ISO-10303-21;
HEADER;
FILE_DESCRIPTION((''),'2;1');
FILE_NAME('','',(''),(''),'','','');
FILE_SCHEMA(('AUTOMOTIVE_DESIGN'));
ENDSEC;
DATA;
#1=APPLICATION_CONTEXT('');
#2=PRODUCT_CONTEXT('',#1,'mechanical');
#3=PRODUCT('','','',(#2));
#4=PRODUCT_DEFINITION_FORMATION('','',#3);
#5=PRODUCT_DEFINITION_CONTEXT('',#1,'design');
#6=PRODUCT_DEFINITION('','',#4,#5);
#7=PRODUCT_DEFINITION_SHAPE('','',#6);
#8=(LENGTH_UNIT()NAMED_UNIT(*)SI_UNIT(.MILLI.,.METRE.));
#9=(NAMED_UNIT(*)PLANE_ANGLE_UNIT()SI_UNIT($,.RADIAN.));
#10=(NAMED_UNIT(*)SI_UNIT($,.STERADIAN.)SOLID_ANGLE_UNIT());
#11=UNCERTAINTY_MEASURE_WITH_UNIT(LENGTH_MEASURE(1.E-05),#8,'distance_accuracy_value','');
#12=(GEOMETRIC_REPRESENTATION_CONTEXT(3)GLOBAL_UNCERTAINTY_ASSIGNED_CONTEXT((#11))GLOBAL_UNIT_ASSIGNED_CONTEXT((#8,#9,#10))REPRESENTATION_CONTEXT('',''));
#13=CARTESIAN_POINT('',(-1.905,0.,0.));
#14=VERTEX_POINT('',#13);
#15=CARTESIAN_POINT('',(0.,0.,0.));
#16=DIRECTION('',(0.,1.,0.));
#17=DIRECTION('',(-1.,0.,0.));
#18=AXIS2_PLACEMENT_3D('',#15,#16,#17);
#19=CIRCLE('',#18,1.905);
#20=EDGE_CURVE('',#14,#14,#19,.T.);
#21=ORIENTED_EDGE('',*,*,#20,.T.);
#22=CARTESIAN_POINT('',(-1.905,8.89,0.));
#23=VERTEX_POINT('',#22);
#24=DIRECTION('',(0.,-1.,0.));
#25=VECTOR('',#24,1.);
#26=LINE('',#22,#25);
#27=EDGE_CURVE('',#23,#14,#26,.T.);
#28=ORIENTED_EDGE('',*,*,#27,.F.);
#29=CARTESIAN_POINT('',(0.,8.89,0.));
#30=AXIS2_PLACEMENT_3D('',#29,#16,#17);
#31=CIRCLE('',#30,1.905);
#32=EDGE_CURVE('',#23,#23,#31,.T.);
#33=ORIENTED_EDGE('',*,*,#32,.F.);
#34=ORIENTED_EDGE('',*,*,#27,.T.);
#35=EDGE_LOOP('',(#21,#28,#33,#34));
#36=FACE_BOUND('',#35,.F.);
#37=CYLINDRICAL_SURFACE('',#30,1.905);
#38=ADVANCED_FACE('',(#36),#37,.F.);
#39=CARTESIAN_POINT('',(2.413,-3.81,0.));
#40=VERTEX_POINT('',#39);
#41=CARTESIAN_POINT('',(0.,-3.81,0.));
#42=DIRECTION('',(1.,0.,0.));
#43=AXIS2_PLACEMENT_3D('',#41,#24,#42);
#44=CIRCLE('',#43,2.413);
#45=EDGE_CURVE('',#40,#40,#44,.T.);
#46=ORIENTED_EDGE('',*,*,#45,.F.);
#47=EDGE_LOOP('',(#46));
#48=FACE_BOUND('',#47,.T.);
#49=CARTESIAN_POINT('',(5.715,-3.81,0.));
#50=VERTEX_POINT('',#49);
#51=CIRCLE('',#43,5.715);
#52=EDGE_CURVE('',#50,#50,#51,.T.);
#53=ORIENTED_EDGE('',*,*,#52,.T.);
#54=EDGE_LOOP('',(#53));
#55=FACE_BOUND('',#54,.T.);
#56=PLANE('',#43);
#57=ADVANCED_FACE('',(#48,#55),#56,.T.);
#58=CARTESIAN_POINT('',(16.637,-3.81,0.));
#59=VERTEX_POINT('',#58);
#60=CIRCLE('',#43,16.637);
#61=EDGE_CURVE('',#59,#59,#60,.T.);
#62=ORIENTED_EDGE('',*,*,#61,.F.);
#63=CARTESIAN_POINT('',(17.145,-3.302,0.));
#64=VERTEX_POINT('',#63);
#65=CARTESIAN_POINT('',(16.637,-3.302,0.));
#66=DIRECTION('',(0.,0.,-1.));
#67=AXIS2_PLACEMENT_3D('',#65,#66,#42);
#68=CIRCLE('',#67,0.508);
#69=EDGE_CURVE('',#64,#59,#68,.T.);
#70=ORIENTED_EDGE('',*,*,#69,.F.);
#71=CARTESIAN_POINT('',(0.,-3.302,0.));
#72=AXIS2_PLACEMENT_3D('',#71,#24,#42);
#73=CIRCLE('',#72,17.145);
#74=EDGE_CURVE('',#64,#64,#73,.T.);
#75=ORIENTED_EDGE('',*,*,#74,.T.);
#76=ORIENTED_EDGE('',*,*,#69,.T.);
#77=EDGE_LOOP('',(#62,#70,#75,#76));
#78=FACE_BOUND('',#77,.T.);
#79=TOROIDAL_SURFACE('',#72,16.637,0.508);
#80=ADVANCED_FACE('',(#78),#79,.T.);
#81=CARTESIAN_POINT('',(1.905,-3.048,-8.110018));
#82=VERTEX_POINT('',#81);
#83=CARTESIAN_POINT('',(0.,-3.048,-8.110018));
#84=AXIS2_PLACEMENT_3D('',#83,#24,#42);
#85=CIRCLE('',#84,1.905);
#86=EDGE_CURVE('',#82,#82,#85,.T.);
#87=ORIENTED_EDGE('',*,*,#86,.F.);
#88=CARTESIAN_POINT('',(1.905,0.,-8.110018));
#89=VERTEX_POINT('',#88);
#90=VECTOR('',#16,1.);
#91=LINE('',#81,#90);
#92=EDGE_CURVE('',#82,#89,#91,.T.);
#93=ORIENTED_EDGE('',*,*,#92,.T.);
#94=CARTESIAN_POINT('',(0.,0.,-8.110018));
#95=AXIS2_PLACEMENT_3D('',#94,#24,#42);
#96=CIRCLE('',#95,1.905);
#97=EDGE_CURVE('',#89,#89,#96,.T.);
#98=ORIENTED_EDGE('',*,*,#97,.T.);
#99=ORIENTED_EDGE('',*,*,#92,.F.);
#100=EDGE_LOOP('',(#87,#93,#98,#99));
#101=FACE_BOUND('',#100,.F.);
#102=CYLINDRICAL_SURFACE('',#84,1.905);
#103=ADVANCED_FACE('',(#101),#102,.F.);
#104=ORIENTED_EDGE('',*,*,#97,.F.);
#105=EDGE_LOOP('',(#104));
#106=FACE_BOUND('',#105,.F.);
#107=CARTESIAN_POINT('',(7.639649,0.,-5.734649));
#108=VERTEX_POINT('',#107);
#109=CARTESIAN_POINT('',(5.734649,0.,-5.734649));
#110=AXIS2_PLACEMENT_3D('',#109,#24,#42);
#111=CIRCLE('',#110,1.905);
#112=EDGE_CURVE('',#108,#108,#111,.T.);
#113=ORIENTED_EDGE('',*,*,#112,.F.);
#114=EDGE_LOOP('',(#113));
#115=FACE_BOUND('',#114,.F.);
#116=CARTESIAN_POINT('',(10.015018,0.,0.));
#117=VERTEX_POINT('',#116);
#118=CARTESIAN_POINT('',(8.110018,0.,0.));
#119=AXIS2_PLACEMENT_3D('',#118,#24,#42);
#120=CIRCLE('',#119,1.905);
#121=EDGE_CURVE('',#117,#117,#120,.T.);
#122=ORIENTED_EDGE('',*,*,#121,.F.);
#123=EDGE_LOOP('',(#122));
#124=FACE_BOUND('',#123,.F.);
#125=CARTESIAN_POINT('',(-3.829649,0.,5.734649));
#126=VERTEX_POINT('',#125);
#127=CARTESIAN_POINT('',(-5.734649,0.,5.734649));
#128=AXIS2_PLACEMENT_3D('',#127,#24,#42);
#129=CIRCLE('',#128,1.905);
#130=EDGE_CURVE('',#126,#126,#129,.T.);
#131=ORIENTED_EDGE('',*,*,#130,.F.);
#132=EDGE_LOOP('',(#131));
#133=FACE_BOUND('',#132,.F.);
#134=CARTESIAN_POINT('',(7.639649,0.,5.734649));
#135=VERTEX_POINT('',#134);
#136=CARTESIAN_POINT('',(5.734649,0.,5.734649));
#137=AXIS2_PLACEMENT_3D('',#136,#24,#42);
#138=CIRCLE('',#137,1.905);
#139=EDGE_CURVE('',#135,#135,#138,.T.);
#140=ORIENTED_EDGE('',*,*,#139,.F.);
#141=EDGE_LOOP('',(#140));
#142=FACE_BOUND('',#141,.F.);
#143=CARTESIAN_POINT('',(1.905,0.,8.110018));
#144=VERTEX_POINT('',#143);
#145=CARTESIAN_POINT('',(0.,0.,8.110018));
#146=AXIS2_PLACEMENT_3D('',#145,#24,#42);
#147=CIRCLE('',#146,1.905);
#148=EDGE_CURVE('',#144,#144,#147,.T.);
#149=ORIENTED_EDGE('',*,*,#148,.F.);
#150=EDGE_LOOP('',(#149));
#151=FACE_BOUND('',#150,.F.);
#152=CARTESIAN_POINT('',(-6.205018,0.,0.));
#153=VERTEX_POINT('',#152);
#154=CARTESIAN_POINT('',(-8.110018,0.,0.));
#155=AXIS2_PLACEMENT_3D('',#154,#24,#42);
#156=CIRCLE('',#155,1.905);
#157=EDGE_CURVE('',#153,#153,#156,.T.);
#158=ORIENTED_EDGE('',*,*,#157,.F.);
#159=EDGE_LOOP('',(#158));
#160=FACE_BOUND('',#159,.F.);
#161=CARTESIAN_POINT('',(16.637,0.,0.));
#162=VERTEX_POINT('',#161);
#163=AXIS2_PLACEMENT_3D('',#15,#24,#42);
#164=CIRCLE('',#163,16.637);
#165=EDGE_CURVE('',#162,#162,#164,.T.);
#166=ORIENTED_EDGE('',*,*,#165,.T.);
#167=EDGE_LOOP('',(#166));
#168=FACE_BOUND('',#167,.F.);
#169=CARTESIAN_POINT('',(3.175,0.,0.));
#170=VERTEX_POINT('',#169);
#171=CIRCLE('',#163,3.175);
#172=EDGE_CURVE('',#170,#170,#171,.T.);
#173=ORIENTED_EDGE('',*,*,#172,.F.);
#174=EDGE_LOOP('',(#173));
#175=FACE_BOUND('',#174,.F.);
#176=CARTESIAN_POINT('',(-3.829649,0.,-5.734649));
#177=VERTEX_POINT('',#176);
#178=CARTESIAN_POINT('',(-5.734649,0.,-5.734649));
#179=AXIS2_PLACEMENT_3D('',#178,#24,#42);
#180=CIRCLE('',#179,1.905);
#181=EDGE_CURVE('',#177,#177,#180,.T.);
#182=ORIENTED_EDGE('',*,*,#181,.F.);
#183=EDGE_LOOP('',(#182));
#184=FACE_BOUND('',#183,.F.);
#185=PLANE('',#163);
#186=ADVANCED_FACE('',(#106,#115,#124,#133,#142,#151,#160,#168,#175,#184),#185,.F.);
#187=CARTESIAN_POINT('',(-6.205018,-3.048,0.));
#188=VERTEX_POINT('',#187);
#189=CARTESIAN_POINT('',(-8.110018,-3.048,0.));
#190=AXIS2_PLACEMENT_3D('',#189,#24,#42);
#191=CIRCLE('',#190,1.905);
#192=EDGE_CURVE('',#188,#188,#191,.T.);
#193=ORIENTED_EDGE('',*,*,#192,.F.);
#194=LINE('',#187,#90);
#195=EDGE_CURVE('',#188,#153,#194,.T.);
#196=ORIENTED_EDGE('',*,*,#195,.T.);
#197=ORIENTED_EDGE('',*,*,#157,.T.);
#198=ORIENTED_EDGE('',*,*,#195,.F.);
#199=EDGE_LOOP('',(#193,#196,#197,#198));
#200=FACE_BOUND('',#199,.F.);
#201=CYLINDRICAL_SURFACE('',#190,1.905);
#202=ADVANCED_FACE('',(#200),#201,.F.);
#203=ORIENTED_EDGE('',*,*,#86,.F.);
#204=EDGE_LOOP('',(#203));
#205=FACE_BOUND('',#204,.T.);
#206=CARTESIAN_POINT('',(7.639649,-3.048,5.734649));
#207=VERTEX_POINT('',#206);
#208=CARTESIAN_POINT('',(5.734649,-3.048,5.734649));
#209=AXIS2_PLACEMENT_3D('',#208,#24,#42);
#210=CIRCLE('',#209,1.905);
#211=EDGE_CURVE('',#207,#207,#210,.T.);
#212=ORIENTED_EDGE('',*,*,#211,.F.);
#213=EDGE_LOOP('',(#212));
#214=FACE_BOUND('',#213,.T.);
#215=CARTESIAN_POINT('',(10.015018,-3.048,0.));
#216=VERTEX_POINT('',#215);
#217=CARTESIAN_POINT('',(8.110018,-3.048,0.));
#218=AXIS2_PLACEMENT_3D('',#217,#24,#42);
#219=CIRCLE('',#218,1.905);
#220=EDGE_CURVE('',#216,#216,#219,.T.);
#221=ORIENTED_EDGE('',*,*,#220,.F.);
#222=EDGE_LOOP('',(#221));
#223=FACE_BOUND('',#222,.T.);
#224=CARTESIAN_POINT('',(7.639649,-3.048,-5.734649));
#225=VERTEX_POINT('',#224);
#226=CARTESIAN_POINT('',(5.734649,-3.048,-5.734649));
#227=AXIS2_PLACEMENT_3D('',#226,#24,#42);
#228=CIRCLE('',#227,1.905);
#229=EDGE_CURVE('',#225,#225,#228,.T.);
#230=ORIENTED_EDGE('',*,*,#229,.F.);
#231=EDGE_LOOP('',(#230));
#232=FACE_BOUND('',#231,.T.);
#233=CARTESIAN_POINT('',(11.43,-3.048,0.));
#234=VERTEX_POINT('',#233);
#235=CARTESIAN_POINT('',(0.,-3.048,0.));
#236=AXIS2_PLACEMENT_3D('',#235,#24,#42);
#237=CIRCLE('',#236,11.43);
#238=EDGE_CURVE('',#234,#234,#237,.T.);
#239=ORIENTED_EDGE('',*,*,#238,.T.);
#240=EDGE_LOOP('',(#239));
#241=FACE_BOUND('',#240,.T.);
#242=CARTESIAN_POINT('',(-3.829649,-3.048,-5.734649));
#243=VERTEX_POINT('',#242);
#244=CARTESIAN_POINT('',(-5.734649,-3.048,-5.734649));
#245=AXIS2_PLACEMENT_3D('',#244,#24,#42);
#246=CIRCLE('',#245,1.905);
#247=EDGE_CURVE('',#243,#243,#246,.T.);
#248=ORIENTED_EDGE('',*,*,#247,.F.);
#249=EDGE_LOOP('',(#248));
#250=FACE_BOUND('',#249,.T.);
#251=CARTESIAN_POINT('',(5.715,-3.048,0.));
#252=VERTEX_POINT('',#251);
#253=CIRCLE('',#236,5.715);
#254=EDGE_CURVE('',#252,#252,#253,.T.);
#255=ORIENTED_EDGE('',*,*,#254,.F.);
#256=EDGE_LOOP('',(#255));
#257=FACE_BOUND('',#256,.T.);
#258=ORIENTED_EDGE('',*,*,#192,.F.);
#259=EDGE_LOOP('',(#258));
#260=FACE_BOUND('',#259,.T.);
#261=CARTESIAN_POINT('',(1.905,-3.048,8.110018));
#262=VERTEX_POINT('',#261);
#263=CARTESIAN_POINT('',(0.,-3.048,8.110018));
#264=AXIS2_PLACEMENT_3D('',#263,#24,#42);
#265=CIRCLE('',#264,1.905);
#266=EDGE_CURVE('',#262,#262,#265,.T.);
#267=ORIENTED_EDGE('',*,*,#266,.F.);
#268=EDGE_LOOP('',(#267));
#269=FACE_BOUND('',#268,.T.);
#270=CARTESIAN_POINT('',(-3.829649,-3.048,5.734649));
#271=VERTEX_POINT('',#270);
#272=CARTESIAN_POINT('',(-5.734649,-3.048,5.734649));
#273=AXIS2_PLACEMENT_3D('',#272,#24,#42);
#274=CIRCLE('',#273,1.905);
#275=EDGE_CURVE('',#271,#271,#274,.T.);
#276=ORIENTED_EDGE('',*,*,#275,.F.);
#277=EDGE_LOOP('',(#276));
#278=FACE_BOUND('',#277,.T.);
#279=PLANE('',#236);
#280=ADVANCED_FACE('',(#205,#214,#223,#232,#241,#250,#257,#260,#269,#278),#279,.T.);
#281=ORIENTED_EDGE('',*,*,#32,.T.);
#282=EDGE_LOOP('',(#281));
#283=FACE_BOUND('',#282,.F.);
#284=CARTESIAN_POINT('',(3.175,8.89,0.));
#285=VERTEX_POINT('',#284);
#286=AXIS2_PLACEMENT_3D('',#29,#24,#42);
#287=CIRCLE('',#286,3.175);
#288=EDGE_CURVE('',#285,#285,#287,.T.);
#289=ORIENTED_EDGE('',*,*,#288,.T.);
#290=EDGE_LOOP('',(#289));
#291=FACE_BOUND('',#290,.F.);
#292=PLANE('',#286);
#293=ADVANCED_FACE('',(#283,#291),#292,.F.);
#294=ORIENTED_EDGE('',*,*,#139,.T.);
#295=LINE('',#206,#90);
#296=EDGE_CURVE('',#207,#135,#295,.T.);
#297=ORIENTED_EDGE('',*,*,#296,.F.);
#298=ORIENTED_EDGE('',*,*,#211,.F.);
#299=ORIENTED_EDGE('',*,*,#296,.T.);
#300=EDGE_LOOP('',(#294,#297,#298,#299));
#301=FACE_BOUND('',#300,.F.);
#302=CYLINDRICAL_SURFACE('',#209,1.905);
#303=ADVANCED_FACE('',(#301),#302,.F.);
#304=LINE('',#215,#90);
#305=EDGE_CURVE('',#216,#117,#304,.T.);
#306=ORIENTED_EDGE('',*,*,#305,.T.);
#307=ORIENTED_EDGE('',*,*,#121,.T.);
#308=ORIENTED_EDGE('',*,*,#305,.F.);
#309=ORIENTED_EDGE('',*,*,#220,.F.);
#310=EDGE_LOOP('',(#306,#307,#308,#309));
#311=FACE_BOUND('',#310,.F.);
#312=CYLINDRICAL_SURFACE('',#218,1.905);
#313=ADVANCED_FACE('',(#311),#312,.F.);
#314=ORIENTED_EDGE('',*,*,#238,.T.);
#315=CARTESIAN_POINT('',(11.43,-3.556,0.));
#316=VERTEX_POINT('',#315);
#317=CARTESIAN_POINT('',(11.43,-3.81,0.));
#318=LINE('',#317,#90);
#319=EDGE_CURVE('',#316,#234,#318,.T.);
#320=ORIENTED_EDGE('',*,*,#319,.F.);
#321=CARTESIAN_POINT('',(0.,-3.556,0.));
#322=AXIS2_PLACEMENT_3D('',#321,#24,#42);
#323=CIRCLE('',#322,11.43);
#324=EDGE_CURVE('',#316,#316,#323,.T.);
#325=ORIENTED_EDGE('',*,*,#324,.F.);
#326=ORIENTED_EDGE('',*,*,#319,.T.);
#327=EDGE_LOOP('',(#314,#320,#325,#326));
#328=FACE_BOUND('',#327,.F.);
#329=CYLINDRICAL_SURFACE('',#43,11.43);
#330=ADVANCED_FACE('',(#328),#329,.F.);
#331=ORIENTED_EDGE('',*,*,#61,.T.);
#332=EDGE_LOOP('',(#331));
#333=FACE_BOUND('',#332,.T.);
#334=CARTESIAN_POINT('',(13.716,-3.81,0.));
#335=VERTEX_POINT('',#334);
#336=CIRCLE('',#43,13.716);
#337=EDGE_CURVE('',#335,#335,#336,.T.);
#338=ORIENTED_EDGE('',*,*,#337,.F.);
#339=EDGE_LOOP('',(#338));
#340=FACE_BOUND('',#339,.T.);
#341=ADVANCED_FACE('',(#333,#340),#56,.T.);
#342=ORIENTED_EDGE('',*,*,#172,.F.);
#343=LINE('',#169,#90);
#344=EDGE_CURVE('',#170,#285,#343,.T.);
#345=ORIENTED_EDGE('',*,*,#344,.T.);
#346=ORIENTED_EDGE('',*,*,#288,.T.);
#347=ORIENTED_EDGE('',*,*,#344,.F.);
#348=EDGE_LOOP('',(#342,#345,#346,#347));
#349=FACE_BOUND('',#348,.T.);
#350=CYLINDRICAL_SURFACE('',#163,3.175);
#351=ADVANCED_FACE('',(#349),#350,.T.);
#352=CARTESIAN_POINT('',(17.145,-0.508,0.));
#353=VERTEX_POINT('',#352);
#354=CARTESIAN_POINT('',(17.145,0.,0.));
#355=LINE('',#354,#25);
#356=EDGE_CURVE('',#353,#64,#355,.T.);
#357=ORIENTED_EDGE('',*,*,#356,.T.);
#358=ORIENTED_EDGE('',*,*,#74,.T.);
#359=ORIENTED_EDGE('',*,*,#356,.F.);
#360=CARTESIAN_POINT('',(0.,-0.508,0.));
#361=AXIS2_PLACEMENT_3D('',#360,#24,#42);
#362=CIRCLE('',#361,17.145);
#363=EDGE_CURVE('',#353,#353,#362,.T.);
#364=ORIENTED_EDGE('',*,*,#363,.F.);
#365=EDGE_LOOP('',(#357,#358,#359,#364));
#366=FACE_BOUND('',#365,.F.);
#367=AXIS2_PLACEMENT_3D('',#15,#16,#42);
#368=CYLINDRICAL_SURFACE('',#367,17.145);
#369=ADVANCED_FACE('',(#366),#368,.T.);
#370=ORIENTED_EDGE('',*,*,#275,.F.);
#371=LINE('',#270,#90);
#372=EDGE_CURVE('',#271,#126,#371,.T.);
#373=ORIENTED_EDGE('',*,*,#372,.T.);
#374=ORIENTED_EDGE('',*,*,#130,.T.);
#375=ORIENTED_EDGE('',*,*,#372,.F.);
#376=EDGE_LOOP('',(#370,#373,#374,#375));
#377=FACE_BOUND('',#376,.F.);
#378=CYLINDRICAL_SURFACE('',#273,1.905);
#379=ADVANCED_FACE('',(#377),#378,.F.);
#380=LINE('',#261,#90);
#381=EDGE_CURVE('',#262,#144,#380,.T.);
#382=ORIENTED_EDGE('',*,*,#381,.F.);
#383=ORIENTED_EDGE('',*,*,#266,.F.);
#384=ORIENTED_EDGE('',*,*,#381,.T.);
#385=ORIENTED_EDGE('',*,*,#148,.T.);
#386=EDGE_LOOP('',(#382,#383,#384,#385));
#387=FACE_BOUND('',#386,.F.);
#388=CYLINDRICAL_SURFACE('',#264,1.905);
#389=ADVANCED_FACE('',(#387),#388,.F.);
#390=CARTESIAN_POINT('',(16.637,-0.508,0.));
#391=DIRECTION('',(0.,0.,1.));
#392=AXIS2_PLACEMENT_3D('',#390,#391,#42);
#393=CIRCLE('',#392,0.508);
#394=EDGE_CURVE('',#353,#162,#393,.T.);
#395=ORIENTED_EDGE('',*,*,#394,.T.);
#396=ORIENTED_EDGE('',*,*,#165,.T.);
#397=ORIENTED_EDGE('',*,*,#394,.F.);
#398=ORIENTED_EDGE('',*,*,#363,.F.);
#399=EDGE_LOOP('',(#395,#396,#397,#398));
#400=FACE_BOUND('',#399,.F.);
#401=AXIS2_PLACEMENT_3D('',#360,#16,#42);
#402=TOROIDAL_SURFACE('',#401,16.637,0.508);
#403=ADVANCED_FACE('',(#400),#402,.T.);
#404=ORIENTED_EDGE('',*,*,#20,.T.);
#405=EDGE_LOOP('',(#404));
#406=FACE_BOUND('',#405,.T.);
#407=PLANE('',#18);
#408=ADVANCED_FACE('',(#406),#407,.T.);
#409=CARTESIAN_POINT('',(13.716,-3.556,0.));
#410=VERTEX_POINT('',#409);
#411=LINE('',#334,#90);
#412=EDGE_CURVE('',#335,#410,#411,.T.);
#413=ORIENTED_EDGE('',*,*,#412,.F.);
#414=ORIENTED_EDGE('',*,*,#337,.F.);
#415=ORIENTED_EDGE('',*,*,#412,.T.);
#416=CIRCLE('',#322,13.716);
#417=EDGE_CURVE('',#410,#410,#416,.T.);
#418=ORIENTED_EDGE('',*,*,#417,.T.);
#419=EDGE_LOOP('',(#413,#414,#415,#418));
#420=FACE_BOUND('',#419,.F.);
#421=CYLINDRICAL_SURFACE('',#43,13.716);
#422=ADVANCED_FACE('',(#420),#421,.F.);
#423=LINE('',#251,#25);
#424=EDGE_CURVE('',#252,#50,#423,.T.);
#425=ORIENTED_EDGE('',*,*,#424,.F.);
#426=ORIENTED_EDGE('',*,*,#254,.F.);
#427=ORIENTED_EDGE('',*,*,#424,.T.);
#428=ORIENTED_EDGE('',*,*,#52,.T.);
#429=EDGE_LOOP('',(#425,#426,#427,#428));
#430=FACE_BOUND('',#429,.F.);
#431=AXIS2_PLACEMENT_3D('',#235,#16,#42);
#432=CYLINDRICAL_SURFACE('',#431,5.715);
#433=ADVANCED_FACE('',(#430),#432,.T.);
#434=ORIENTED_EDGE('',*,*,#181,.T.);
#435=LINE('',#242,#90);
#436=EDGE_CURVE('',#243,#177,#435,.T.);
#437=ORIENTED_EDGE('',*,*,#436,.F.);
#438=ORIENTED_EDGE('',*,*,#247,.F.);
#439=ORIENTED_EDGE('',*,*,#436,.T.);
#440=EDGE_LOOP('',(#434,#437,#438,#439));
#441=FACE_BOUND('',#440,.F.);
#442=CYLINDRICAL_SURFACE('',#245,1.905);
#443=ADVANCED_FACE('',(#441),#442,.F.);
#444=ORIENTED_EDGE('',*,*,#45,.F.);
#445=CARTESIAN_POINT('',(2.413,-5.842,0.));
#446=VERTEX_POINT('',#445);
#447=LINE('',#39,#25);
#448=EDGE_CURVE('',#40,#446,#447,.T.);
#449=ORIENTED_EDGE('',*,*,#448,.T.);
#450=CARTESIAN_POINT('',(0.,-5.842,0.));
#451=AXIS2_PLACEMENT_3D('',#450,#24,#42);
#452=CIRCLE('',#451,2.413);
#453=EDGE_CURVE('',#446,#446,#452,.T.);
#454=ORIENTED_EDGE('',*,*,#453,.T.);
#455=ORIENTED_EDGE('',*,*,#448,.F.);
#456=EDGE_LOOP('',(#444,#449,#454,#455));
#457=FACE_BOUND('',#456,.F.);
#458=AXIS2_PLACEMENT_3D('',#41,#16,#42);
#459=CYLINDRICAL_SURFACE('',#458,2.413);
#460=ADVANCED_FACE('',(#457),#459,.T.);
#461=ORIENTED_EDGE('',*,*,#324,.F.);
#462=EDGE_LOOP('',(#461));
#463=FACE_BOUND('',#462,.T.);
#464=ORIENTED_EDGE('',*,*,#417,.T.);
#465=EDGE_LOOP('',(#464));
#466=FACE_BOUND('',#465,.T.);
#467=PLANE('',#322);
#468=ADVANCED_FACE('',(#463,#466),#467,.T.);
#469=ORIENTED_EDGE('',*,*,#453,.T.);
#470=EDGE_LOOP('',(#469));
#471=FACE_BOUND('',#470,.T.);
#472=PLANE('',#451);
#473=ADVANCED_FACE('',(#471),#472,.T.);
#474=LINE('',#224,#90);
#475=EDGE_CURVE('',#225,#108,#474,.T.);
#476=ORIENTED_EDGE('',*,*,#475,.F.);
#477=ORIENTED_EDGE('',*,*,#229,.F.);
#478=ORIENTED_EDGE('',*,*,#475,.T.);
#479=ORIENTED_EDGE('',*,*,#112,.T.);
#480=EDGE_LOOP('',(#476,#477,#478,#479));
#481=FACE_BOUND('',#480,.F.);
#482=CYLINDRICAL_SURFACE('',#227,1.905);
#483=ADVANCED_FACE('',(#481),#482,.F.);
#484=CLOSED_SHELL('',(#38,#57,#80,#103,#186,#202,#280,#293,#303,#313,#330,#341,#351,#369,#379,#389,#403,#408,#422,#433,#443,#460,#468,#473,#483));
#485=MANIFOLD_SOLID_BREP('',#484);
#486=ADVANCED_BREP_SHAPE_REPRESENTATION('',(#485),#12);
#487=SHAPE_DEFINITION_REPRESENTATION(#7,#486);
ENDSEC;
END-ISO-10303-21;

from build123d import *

# Parameters (mm, degrees)
F0_R      = 17.145
F1_DEPTH  = 3.81
F2_R      = 13.716
F2_R_2    = 11.43
F3_DEPTH  = 0.254
F4_DEPTH  = 0.762
F5_R      = 5.715
F6_DEPTH  = 0.762
F8_R      = 1.905
F9_DEPTH  = 25.4
F10_R     = 2.413
F11_DEPTH = 2.032
F14_R     = 3.175
F15_DEPTH = 8.89
F16_R     = 1.905
F17_DEPTH = 8.89
F18_R     = 0.508
F19_R     = 0.508


# Not quite as in the source:
# - the program builds the solid bodies; features that only make, move or delete a surface that nothing else refers to are left out


with BuildPart() as f1:
    # F0 (on Front) → F1 (new body)
    with BuildSketch(Plane.XZ):
        Circle(F0_R)
    extrude(amount=F1_DEPTH)

    # F2 (on face) → F3 (cut)
    with BuildSketch(Plane.XZ.offset(3.81)):
        Circle(F2_R)
        Circle(F2_R_2, mode=Mode.SUBTRACT)
    extrude(amount=-F3_DEPTH, mode=Mode.SUBTRACT)

    # F4 (cut): a face of the model
    f4_faces = [f1.faces().sort_by_distance(p)[0] for p in [
        (0, -3.81, 0),
    ]]
    extrude(f4_faces, amount=-F4_DEPTH, mode=Mode.SUBTRACT)

    # F5 (on face) → F6 (join)
    with BuildSketch(Plane.XZ.offset(3.048)):
        Circle(F5_R)
    extrude(amount=F6_DEPTH)

    # F8 (on face) → F9 (cut)
    with BuildSketch(Plane.XZ.offset(3.048)):
        with Locations((0, 8.1100180022)):
            Circle(F8_R)
        with Locations((-5.7346487249, 5.7346487249)):
            Circle(F8_R)
        with Locations((-5.7346487249, -5.7346487249)):
            Circle(F8_R)
        with Locations((0, -8.1100180022)):
            Circle(F8_R)
        with Locations((5.7346487249, -5.7346487249)):
            Circle(F8_R)
        with Locations((8.1100180022, 0)):
            Circle(F8_R)
        with Locations((5.7346487249, 5.7346487249)):
            Circle(F8_R)
        with Locations((-8.1100180022, 0)):
            Circle(F8_R)
    extrude(amount=-F9_DEPTH, mode=Mode.SUBTRACT)

    # F10 (on face) → F11 (join)
    with BuildSketch(Plane.XZ.offset(3.81)):
        Circle(F10_R)
    extrude(amount=F11_DEPTH)

    # F14 (on Front) → F15 (join)
    with BuildSketch(Plane.XZ):
        Circle(F14_R)
    extrude(amount=-F15_DEPTH)

    # F16 (on face) → F17 (cut)
    with BuildSketch(Plane(origin=(0, 8.89, 0), x_dir=(-1, 0, 0), z_dir=(0, 1, 0))):
        Circle(F16_R)
    extrude(amount=-F17_DEPTH, mode=Mode.SUBTRACT)

    # F18
    f18_edges = [f1.edges().sort_by_distance(p)[0] for p in [
        (-17.145, -3.81, 0),
    ]]
    fillet(f18_edges, radius=F18_R)

    # F19
    f19_edges = [f1.edges().sort_by_distance(p)[0] for p in [
        (-17.145, 0, 0),
    ]]
    fillet(f19_edges, radius=F19_R)


solid = f1.part
